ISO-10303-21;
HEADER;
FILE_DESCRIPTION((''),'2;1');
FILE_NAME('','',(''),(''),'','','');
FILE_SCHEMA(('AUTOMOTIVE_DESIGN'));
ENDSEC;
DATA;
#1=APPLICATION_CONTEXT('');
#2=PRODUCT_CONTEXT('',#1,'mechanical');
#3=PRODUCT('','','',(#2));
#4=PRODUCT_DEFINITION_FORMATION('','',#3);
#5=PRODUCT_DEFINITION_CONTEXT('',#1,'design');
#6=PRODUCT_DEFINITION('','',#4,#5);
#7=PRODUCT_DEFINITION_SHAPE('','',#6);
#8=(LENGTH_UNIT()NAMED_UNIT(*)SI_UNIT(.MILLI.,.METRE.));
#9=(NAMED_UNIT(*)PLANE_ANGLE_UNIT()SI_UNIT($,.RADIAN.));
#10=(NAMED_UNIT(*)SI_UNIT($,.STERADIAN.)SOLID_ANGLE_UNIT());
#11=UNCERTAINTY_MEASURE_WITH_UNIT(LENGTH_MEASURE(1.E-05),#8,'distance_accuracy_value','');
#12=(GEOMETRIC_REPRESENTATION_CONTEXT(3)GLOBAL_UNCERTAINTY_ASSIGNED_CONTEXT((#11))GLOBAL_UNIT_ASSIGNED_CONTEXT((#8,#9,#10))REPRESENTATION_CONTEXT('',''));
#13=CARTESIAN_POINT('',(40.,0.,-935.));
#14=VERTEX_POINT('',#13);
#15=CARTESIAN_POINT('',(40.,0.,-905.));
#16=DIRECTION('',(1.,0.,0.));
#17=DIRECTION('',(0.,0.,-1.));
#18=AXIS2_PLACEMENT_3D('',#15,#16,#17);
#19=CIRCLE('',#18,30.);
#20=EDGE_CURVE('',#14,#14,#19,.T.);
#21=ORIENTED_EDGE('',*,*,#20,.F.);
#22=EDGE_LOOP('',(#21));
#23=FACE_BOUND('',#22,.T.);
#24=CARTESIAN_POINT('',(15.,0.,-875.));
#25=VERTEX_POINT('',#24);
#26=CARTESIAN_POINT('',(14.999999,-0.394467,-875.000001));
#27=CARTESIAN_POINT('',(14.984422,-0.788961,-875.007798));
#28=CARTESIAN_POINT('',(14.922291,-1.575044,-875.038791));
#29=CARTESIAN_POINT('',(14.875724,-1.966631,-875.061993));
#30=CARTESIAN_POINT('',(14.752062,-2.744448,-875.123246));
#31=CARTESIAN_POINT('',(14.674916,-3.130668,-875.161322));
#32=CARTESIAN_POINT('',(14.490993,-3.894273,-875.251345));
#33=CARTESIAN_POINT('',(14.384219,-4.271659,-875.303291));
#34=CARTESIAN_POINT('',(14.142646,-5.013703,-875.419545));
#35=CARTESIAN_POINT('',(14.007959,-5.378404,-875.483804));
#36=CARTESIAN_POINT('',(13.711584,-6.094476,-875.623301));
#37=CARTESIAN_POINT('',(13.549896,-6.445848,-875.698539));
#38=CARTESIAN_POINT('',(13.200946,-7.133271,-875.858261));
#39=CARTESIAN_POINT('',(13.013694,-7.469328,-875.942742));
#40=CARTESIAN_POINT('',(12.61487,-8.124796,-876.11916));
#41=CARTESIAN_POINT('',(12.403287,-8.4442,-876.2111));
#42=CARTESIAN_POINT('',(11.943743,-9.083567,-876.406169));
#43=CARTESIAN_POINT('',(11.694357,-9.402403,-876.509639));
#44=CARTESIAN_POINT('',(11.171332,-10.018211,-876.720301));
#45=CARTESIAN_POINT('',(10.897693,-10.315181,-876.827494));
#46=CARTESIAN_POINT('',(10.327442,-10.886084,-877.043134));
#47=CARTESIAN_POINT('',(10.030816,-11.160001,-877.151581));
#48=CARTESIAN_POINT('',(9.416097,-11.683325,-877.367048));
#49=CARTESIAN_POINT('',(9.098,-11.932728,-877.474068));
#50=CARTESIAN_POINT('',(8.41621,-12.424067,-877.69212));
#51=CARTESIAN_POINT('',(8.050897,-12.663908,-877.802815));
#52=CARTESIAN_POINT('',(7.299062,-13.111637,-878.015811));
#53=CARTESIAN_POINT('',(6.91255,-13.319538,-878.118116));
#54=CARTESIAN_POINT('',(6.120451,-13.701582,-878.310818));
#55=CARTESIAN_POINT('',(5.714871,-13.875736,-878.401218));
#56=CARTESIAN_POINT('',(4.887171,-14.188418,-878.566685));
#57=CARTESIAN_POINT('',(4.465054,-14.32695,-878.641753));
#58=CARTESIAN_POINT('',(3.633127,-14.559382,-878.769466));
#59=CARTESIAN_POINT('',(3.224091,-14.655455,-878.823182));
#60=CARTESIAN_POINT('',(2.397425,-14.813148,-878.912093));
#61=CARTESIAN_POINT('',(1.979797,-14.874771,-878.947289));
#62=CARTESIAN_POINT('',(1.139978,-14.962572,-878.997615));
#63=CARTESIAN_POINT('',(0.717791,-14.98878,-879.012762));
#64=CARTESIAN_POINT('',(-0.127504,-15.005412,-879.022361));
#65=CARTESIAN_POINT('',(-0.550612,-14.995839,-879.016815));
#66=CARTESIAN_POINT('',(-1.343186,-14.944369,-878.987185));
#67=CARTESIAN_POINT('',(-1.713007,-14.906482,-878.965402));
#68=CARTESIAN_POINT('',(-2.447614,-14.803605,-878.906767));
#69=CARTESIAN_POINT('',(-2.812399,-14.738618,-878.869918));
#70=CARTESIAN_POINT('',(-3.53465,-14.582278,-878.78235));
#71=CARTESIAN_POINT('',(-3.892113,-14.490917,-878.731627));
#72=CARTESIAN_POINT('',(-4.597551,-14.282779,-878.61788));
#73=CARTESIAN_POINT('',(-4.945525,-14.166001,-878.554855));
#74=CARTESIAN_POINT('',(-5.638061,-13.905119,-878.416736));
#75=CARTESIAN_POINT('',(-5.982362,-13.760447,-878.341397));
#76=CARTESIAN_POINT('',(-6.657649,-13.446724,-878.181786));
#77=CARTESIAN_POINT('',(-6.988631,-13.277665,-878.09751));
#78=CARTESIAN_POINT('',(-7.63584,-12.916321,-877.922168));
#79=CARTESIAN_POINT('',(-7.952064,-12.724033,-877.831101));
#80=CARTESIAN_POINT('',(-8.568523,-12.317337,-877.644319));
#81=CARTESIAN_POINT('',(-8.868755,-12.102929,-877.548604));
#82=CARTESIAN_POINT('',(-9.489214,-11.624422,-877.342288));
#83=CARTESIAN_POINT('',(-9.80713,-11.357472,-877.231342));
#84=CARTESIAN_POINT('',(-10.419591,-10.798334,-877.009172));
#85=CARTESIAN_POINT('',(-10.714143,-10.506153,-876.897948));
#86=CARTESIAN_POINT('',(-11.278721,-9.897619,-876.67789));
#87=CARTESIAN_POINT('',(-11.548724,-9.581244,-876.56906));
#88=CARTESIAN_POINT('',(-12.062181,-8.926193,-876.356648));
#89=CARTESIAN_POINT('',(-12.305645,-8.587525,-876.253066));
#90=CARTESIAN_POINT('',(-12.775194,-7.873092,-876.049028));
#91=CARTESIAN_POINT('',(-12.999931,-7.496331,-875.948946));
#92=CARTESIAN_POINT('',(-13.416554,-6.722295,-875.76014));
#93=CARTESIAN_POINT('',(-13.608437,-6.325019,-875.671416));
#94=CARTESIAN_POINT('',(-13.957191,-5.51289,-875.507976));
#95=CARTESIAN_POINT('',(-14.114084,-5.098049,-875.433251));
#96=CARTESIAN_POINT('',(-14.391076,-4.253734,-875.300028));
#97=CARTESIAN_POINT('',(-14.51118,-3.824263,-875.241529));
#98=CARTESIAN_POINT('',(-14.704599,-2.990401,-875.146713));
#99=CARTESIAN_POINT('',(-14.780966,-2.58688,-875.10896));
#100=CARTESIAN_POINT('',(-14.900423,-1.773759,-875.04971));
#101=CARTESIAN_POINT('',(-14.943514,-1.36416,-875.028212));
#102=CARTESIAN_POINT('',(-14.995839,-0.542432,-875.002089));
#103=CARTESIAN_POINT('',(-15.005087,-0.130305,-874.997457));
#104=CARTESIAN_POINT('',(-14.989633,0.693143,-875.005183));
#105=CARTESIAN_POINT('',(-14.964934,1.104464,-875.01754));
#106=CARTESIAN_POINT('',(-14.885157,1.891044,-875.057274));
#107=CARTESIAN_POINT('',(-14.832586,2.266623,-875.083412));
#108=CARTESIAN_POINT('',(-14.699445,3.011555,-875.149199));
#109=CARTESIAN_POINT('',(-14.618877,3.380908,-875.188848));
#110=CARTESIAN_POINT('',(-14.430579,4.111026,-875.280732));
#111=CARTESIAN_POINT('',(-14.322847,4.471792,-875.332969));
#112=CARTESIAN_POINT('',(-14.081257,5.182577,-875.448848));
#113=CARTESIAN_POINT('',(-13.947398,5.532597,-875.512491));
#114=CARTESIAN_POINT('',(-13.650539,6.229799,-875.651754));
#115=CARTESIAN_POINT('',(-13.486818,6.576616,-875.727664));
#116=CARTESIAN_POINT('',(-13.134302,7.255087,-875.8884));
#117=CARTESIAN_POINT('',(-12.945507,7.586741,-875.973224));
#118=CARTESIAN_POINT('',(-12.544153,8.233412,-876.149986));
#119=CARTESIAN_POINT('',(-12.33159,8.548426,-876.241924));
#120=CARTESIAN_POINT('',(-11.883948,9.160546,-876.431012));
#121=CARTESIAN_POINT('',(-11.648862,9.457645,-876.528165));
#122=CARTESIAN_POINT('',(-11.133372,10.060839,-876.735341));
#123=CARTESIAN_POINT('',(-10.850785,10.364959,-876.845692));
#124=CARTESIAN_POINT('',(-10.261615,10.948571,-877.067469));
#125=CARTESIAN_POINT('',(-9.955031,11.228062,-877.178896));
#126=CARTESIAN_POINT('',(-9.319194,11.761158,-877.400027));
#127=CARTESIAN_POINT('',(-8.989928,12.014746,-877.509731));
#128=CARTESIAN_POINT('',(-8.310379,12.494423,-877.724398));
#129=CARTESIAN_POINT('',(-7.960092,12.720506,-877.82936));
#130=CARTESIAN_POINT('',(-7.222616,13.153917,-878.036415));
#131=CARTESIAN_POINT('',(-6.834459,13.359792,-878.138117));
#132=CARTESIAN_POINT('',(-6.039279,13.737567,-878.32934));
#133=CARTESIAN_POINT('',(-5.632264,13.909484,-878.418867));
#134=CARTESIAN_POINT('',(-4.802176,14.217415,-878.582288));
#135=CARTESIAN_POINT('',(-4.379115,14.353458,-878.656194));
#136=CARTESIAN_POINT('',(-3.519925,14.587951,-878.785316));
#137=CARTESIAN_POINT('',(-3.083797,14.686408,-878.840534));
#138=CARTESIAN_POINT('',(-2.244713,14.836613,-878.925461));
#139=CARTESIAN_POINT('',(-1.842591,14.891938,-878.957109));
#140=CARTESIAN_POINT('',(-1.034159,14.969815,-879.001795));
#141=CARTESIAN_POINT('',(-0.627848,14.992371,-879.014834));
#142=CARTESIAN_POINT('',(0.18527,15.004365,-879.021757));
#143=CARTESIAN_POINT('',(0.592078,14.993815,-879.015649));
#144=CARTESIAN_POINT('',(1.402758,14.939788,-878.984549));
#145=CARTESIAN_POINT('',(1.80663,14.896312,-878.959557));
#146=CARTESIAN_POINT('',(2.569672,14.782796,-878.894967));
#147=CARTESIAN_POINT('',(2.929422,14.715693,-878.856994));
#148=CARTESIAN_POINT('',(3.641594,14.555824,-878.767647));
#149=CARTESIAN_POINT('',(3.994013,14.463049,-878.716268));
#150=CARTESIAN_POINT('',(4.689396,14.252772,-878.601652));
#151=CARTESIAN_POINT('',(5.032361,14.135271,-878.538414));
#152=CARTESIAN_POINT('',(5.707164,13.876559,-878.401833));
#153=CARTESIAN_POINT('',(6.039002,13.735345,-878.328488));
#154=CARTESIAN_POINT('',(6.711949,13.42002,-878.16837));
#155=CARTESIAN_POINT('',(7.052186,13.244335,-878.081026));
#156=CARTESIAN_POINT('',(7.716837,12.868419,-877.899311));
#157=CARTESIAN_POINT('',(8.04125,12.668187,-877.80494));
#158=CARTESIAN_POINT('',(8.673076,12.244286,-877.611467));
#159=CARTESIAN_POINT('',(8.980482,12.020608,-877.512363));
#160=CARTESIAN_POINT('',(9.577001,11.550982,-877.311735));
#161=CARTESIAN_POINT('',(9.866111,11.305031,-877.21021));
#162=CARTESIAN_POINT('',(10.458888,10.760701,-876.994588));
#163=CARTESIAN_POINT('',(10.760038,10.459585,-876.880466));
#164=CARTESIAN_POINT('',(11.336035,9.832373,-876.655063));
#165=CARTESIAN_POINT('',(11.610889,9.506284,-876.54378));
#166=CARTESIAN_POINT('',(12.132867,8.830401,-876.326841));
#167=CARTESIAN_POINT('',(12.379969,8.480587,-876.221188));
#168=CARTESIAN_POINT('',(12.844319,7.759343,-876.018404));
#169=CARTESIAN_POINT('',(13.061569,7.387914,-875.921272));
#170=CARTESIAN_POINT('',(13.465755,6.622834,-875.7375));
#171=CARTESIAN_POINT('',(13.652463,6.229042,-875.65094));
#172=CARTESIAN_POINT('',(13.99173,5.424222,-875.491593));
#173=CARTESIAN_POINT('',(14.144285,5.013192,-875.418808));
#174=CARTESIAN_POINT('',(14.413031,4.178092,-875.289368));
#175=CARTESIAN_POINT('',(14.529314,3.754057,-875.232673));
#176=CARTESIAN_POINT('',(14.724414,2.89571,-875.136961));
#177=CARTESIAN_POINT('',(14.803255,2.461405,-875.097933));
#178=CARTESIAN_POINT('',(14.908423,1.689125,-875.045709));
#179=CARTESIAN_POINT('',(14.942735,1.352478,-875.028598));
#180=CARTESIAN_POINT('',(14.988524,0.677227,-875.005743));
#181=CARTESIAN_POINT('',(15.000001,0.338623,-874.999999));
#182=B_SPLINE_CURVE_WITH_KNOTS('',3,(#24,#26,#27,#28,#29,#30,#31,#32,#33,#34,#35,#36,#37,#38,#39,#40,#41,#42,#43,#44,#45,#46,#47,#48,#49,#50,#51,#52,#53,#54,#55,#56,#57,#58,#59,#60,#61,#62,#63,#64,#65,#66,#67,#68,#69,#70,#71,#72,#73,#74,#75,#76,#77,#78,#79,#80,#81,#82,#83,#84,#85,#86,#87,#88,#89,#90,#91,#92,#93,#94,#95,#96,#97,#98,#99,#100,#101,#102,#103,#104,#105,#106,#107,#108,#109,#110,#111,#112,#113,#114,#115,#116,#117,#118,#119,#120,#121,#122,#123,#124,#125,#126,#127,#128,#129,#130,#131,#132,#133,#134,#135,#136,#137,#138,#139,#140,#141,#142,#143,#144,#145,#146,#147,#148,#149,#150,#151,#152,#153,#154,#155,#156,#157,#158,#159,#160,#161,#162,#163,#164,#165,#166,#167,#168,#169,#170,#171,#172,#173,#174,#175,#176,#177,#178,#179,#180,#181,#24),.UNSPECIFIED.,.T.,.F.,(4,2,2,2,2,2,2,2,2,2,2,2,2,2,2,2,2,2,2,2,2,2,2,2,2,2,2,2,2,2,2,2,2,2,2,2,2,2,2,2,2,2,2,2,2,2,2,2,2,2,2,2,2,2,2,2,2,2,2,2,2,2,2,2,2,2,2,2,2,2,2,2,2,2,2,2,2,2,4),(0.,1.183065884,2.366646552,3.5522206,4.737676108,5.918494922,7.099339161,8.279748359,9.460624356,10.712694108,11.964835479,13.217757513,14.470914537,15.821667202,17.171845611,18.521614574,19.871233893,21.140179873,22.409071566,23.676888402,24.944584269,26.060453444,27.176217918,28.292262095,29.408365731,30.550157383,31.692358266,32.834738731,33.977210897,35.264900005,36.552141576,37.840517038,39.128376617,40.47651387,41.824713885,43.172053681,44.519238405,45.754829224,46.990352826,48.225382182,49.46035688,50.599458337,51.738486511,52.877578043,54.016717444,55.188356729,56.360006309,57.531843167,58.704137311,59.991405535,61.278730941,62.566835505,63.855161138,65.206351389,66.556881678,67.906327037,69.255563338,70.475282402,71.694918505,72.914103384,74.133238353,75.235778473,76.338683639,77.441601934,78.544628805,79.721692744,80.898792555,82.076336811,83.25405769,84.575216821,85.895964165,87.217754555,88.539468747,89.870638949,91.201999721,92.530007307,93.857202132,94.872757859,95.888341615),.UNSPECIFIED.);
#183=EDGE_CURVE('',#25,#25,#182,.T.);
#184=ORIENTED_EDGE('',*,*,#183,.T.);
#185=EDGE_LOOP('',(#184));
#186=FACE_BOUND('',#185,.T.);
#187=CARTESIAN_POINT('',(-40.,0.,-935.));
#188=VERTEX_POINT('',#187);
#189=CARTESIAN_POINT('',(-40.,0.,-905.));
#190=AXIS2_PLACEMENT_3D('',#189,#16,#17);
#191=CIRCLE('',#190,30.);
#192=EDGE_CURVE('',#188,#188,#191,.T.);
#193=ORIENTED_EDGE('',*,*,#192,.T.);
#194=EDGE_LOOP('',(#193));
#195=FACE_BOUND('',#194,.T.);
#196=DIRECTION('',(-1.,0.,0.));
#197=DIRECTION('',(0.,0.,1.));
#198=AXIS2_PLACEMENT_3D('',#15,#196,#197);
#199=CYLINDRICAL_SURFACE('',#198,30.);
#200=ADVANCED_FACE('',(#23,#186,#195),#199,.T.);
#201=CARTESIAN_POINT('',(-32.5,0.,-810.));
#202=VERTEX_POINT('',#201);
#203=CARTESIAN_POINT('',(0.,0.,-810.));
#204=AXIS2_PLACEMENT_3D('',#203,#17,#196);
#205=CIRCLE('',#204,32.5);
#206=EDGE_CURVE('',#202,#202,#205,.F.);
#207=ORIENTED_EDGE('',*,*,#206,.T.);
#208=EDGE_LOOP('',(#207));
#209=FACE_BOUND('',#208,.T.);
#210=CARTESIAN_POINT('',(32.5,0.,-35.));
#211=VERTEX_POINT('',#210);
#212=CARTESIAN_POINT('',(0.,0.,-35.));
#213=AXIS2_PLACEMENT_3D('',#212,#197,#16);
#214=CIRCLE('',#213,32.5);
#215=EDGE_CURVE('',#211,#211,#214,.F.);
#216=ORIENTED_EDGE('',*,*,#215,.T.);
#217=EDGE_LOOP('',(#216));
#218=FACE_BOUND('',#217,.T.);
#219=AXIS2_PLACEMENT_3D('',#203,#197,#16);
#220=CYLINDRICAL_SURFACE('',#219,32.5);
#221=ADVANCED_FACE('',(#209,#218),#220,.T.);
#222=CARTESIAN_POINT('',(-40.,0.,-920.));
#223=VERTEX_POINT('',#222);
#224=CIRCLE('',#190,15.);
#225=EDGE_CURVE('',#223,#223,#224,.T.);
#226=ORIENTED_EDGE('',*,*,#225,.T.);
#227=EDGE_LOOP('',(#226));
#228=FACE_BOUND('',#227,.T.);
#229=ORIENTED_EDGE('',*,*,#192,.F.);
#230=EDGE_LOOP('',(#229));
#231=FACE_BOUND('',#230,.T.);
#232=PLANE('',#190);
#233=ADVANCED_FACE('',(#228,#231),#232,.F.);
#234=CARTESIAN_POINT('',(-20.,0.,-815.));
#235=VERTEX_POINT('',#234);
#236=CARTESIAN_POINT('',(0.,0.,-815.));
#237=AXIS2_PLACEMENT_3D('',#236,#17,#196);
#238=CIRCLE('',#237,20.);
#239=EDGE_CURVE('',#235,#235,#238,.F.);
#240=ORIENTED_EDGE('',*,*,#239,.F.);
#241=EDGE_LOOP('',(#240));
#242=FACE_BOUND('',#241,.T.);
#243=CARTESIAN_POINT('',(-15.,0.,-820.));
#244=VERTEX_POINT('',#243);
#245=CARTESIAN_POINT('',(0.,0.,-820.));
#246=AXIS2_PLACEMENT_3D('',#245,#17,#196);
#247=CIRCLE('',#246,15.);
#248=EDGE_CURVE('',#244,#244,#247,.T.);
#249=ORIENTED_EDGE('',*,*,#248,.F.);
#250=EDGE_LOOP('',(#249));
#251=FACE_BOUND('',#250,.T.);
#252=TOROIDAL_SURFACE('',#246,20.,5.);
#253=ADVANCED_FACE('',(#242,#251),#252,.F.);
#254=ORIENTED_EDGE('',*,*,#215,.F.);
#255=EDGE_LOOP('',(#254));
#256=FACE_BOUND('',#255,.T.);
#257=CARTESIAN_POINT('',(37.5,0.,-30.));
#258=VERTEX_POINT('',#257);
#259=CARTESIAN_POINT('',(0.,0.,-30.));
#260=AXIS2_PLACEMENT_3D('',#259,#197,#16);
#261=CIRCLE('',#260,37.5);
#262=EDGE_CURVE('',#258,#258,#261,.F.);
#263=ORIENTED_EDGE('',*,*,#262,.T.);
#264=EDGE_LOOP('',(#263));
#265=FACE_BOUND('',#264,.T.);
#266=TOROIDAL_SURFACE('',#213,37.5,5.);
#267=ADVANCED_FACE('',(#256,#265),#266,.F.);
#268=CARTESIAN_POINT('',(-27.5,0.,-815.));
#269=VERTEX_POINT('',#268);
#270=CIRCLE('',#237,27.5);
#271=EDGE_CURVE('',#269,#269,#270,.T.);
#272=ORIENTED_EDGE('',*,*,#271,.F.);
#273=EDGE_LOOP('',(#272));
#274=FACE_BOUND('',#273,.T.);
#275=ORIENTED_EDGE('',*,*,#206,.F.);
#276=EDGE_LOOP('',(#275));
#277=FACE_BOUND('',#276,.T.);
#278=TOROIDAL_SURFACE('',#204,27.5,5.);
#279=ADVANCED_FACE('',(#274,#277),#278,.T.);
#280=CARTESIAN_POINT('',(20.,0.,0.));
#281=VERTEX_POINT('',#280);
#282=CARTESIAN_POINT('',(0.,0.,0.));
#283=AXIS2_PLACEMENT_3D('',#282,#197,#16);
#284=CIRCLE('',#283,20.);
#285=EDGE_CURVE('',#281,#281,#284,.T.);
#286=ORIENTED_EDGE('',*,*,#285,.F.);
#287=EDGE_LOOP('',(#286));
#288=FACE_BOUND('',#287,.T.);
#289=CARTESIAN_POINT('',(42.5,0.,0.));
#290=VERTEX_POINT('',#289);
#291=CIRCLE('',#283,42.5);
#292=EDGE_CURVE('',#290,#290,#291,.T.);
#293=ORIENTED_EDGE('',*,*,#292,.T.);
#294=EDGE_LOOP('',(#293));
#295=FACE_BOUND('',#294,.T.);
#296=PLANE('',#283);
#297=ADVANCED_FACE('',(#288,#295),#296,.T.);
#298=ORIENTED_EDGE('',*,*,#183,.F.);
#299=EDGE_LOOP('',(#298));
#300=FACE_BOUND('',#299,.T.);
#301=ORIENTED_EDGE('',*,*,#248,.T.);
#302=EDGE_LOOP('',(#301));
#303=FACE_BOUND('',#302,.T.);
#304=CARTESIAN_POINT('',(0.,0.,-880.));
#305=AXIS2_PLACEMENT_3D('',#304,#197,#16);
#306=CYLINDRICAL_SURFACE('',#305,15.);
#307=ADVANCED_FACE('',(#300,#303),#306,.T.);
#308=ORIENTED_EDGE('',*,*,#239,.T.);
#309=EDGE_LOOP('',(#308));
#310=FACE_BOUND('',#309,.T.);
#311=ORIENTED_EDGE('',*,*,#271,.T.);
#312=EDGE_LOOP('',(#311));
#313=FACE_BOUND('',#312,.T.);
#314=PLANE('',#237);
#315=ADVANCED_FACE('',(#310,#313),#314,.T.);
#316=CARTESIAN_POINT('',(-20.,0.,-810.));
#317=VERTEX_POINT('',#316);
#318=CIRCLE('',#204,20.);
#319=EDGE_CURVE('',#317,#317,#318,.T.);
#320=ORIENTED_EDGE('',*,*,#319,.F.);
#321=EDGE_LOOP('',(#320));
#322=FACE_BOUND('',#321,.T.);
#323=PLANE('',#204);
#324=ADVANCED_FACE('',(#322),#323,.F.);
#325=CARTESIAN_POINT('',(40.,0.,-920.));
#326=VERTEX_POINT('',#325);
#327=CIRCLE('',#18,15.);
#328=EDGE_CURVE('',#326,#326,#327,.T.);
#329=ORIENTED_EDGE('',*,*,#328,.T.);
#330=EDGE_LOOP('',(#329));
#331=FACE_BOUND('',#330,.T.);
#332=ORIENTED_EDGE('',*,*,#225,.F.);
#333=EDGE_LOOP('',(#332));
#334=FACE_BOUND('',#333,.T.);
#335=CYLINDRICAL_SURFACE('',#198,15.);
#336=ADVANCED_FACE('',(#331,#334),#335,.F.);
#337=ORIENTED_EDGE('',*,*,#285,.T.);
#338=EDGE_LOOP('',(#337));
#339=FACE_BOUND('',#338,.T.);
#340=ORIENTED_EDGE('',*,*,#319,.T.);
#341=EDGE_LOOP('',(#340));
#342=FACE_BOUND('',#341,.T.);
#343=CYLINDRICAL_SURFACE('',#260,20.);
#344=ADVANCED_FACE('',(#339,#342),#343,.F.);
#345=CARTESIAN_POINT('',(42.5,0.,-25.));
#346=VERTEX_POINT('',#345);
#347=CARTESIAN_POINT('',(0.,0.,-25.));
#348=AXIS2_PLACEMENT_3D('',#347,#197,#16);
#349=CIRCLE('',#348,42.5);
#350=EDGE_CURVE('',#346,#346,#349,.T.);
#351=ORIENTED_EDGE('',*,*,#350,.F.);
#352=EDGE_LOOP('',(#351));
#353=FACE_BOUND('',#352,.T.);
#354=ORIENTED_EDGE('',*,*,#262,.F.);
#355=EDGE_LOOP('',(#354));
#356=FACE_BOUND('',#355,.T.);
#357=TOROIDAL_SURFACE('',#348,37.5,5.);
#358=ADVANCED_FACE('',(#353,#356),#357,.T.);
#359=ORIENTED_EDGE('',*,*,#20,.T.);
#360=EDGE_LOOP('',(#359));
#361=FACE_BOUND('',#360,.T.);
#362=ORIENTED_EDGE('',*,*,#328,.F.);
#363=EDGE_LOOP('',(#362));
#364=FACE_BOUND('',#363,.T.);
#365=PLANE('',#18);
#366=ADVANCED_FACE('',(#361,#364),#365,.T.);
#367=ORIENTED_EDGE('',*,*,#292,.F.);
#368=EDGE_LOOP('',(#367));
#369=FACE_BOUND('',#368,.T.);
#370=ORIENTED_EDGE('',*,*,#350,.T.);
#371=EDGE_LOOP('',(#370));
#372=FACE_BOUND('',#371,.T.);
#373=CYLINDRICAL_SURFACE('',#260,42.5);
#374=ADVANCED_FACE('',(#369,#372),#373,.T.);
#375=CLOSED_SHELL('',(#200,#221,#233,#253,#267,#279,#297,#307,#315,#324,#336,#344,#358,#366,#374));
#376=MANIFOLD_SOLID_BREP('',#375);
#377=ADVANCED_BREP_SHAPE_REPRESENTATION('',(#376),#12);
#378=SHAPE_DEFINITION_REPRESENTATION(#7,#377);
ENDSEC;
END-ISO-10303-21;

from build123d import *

# Parameters (mm, degrees)
SKETCH1_R           = 42.5
SKETCH1_R_2         = 20
BOSS_EXTRUDE1_DEPTH = 30
SKETCH2_R           = 32.5
SKETCH2_R_2         = 20
BOSS_EXTRUDE2_DEPTH = 780
SKETCH3_R           = 32.5
BOSS_EXTRUDE3_DEPTH = 5
SKETCH4_R           = 15
BOSS_EXTRUDE4_DEPTH = 65
SKETCH5_R           = 30
SKETCH5_R_2         = 15
BOSS_EXTRUDE5_DEPTH = 40
FILLET1_R           = 5


with BuildPart() as part:
    # Sketch1 → Boss-Extrude1 (new body)
    with BuildSketch(Plane.XY):
        Circle(SKETCH1_R)
        Circle(SKETCH1_R_2, mode=Mode.SUBTRACT)
    extrude(amount=-BOSS_EXTRUDE1_DEPTH)

    # Sketch2 → Boss-Extrude2 (add)
    with BuildSketch(Plane(origin=(0, 0, -30), x_dir=(-1, 0, 0), z_dir=(0, 0, -1))):
        with Locations(Location((0, 0, 0), (0, 0, 180))):
            Circle(SKETCH2_R)
        with Locations(Location((0, 0, 0), (0, 0, 180))):
            Circle(SKETCH2_R_2, mode=Mode.SUBTRACT)
    extrude(amount=BOSS_EXTRUDE2_DEPTH)

    # Sketch3 → Boss-Extrude3 (add)
    with BuildSketch(Plane(origin=(0, 0, -810), x_dir=(-1, 0, 0), z_dir=(0, 0, -1))):
        with Locations(Location((0, 0, 0), (0, 0, 180))):
            Circle(SKETCH3_R)
    extrude(amount=BOSS_EXTRUDE3_DEPTH)

    # Sketch4 → Boss-Extrude4 (add)
    with BuildSketch(Plane(origin=(0, 0, -815), x_dir=(-1, 0, 0), z_dir=(0, 0, -1))):
        Circle(SKETCH4_R)
    extrude(amount=BOSS_EXTRUDE4_DEPTH)

    # Sketch5 → Boss-Extrude5 (add, symmetric)
    with BuildSketch(Plane(origin=(0, 0, 0), x_dir=(0, 0, -1), z_dir=(1, 0, 0))):
        with Locations((905, 0)):
            Circle(SKETCH5_R)
        with Locations((905, 0)):
            Circle(SKETCH5_R_2, mode=Mode.SUBTRACT)
    extrude(amount=BOSS_EXTRUDE5_DEPTH, both=True)

    # Fillet1
    fillet1_edges = [part.edges().sort_by_distance(p)[0] for p in [
        (-32.5, 0, -30),
        (-32.5, 0, -815),
        (15, 0, -815),
        (-42.5, 0, -30),
    ]]
    fillet(fillet1_edges, radius=FILLET1_R - 0.0001)  # a hair under: the kernel refuses the full size


solid = part.part
